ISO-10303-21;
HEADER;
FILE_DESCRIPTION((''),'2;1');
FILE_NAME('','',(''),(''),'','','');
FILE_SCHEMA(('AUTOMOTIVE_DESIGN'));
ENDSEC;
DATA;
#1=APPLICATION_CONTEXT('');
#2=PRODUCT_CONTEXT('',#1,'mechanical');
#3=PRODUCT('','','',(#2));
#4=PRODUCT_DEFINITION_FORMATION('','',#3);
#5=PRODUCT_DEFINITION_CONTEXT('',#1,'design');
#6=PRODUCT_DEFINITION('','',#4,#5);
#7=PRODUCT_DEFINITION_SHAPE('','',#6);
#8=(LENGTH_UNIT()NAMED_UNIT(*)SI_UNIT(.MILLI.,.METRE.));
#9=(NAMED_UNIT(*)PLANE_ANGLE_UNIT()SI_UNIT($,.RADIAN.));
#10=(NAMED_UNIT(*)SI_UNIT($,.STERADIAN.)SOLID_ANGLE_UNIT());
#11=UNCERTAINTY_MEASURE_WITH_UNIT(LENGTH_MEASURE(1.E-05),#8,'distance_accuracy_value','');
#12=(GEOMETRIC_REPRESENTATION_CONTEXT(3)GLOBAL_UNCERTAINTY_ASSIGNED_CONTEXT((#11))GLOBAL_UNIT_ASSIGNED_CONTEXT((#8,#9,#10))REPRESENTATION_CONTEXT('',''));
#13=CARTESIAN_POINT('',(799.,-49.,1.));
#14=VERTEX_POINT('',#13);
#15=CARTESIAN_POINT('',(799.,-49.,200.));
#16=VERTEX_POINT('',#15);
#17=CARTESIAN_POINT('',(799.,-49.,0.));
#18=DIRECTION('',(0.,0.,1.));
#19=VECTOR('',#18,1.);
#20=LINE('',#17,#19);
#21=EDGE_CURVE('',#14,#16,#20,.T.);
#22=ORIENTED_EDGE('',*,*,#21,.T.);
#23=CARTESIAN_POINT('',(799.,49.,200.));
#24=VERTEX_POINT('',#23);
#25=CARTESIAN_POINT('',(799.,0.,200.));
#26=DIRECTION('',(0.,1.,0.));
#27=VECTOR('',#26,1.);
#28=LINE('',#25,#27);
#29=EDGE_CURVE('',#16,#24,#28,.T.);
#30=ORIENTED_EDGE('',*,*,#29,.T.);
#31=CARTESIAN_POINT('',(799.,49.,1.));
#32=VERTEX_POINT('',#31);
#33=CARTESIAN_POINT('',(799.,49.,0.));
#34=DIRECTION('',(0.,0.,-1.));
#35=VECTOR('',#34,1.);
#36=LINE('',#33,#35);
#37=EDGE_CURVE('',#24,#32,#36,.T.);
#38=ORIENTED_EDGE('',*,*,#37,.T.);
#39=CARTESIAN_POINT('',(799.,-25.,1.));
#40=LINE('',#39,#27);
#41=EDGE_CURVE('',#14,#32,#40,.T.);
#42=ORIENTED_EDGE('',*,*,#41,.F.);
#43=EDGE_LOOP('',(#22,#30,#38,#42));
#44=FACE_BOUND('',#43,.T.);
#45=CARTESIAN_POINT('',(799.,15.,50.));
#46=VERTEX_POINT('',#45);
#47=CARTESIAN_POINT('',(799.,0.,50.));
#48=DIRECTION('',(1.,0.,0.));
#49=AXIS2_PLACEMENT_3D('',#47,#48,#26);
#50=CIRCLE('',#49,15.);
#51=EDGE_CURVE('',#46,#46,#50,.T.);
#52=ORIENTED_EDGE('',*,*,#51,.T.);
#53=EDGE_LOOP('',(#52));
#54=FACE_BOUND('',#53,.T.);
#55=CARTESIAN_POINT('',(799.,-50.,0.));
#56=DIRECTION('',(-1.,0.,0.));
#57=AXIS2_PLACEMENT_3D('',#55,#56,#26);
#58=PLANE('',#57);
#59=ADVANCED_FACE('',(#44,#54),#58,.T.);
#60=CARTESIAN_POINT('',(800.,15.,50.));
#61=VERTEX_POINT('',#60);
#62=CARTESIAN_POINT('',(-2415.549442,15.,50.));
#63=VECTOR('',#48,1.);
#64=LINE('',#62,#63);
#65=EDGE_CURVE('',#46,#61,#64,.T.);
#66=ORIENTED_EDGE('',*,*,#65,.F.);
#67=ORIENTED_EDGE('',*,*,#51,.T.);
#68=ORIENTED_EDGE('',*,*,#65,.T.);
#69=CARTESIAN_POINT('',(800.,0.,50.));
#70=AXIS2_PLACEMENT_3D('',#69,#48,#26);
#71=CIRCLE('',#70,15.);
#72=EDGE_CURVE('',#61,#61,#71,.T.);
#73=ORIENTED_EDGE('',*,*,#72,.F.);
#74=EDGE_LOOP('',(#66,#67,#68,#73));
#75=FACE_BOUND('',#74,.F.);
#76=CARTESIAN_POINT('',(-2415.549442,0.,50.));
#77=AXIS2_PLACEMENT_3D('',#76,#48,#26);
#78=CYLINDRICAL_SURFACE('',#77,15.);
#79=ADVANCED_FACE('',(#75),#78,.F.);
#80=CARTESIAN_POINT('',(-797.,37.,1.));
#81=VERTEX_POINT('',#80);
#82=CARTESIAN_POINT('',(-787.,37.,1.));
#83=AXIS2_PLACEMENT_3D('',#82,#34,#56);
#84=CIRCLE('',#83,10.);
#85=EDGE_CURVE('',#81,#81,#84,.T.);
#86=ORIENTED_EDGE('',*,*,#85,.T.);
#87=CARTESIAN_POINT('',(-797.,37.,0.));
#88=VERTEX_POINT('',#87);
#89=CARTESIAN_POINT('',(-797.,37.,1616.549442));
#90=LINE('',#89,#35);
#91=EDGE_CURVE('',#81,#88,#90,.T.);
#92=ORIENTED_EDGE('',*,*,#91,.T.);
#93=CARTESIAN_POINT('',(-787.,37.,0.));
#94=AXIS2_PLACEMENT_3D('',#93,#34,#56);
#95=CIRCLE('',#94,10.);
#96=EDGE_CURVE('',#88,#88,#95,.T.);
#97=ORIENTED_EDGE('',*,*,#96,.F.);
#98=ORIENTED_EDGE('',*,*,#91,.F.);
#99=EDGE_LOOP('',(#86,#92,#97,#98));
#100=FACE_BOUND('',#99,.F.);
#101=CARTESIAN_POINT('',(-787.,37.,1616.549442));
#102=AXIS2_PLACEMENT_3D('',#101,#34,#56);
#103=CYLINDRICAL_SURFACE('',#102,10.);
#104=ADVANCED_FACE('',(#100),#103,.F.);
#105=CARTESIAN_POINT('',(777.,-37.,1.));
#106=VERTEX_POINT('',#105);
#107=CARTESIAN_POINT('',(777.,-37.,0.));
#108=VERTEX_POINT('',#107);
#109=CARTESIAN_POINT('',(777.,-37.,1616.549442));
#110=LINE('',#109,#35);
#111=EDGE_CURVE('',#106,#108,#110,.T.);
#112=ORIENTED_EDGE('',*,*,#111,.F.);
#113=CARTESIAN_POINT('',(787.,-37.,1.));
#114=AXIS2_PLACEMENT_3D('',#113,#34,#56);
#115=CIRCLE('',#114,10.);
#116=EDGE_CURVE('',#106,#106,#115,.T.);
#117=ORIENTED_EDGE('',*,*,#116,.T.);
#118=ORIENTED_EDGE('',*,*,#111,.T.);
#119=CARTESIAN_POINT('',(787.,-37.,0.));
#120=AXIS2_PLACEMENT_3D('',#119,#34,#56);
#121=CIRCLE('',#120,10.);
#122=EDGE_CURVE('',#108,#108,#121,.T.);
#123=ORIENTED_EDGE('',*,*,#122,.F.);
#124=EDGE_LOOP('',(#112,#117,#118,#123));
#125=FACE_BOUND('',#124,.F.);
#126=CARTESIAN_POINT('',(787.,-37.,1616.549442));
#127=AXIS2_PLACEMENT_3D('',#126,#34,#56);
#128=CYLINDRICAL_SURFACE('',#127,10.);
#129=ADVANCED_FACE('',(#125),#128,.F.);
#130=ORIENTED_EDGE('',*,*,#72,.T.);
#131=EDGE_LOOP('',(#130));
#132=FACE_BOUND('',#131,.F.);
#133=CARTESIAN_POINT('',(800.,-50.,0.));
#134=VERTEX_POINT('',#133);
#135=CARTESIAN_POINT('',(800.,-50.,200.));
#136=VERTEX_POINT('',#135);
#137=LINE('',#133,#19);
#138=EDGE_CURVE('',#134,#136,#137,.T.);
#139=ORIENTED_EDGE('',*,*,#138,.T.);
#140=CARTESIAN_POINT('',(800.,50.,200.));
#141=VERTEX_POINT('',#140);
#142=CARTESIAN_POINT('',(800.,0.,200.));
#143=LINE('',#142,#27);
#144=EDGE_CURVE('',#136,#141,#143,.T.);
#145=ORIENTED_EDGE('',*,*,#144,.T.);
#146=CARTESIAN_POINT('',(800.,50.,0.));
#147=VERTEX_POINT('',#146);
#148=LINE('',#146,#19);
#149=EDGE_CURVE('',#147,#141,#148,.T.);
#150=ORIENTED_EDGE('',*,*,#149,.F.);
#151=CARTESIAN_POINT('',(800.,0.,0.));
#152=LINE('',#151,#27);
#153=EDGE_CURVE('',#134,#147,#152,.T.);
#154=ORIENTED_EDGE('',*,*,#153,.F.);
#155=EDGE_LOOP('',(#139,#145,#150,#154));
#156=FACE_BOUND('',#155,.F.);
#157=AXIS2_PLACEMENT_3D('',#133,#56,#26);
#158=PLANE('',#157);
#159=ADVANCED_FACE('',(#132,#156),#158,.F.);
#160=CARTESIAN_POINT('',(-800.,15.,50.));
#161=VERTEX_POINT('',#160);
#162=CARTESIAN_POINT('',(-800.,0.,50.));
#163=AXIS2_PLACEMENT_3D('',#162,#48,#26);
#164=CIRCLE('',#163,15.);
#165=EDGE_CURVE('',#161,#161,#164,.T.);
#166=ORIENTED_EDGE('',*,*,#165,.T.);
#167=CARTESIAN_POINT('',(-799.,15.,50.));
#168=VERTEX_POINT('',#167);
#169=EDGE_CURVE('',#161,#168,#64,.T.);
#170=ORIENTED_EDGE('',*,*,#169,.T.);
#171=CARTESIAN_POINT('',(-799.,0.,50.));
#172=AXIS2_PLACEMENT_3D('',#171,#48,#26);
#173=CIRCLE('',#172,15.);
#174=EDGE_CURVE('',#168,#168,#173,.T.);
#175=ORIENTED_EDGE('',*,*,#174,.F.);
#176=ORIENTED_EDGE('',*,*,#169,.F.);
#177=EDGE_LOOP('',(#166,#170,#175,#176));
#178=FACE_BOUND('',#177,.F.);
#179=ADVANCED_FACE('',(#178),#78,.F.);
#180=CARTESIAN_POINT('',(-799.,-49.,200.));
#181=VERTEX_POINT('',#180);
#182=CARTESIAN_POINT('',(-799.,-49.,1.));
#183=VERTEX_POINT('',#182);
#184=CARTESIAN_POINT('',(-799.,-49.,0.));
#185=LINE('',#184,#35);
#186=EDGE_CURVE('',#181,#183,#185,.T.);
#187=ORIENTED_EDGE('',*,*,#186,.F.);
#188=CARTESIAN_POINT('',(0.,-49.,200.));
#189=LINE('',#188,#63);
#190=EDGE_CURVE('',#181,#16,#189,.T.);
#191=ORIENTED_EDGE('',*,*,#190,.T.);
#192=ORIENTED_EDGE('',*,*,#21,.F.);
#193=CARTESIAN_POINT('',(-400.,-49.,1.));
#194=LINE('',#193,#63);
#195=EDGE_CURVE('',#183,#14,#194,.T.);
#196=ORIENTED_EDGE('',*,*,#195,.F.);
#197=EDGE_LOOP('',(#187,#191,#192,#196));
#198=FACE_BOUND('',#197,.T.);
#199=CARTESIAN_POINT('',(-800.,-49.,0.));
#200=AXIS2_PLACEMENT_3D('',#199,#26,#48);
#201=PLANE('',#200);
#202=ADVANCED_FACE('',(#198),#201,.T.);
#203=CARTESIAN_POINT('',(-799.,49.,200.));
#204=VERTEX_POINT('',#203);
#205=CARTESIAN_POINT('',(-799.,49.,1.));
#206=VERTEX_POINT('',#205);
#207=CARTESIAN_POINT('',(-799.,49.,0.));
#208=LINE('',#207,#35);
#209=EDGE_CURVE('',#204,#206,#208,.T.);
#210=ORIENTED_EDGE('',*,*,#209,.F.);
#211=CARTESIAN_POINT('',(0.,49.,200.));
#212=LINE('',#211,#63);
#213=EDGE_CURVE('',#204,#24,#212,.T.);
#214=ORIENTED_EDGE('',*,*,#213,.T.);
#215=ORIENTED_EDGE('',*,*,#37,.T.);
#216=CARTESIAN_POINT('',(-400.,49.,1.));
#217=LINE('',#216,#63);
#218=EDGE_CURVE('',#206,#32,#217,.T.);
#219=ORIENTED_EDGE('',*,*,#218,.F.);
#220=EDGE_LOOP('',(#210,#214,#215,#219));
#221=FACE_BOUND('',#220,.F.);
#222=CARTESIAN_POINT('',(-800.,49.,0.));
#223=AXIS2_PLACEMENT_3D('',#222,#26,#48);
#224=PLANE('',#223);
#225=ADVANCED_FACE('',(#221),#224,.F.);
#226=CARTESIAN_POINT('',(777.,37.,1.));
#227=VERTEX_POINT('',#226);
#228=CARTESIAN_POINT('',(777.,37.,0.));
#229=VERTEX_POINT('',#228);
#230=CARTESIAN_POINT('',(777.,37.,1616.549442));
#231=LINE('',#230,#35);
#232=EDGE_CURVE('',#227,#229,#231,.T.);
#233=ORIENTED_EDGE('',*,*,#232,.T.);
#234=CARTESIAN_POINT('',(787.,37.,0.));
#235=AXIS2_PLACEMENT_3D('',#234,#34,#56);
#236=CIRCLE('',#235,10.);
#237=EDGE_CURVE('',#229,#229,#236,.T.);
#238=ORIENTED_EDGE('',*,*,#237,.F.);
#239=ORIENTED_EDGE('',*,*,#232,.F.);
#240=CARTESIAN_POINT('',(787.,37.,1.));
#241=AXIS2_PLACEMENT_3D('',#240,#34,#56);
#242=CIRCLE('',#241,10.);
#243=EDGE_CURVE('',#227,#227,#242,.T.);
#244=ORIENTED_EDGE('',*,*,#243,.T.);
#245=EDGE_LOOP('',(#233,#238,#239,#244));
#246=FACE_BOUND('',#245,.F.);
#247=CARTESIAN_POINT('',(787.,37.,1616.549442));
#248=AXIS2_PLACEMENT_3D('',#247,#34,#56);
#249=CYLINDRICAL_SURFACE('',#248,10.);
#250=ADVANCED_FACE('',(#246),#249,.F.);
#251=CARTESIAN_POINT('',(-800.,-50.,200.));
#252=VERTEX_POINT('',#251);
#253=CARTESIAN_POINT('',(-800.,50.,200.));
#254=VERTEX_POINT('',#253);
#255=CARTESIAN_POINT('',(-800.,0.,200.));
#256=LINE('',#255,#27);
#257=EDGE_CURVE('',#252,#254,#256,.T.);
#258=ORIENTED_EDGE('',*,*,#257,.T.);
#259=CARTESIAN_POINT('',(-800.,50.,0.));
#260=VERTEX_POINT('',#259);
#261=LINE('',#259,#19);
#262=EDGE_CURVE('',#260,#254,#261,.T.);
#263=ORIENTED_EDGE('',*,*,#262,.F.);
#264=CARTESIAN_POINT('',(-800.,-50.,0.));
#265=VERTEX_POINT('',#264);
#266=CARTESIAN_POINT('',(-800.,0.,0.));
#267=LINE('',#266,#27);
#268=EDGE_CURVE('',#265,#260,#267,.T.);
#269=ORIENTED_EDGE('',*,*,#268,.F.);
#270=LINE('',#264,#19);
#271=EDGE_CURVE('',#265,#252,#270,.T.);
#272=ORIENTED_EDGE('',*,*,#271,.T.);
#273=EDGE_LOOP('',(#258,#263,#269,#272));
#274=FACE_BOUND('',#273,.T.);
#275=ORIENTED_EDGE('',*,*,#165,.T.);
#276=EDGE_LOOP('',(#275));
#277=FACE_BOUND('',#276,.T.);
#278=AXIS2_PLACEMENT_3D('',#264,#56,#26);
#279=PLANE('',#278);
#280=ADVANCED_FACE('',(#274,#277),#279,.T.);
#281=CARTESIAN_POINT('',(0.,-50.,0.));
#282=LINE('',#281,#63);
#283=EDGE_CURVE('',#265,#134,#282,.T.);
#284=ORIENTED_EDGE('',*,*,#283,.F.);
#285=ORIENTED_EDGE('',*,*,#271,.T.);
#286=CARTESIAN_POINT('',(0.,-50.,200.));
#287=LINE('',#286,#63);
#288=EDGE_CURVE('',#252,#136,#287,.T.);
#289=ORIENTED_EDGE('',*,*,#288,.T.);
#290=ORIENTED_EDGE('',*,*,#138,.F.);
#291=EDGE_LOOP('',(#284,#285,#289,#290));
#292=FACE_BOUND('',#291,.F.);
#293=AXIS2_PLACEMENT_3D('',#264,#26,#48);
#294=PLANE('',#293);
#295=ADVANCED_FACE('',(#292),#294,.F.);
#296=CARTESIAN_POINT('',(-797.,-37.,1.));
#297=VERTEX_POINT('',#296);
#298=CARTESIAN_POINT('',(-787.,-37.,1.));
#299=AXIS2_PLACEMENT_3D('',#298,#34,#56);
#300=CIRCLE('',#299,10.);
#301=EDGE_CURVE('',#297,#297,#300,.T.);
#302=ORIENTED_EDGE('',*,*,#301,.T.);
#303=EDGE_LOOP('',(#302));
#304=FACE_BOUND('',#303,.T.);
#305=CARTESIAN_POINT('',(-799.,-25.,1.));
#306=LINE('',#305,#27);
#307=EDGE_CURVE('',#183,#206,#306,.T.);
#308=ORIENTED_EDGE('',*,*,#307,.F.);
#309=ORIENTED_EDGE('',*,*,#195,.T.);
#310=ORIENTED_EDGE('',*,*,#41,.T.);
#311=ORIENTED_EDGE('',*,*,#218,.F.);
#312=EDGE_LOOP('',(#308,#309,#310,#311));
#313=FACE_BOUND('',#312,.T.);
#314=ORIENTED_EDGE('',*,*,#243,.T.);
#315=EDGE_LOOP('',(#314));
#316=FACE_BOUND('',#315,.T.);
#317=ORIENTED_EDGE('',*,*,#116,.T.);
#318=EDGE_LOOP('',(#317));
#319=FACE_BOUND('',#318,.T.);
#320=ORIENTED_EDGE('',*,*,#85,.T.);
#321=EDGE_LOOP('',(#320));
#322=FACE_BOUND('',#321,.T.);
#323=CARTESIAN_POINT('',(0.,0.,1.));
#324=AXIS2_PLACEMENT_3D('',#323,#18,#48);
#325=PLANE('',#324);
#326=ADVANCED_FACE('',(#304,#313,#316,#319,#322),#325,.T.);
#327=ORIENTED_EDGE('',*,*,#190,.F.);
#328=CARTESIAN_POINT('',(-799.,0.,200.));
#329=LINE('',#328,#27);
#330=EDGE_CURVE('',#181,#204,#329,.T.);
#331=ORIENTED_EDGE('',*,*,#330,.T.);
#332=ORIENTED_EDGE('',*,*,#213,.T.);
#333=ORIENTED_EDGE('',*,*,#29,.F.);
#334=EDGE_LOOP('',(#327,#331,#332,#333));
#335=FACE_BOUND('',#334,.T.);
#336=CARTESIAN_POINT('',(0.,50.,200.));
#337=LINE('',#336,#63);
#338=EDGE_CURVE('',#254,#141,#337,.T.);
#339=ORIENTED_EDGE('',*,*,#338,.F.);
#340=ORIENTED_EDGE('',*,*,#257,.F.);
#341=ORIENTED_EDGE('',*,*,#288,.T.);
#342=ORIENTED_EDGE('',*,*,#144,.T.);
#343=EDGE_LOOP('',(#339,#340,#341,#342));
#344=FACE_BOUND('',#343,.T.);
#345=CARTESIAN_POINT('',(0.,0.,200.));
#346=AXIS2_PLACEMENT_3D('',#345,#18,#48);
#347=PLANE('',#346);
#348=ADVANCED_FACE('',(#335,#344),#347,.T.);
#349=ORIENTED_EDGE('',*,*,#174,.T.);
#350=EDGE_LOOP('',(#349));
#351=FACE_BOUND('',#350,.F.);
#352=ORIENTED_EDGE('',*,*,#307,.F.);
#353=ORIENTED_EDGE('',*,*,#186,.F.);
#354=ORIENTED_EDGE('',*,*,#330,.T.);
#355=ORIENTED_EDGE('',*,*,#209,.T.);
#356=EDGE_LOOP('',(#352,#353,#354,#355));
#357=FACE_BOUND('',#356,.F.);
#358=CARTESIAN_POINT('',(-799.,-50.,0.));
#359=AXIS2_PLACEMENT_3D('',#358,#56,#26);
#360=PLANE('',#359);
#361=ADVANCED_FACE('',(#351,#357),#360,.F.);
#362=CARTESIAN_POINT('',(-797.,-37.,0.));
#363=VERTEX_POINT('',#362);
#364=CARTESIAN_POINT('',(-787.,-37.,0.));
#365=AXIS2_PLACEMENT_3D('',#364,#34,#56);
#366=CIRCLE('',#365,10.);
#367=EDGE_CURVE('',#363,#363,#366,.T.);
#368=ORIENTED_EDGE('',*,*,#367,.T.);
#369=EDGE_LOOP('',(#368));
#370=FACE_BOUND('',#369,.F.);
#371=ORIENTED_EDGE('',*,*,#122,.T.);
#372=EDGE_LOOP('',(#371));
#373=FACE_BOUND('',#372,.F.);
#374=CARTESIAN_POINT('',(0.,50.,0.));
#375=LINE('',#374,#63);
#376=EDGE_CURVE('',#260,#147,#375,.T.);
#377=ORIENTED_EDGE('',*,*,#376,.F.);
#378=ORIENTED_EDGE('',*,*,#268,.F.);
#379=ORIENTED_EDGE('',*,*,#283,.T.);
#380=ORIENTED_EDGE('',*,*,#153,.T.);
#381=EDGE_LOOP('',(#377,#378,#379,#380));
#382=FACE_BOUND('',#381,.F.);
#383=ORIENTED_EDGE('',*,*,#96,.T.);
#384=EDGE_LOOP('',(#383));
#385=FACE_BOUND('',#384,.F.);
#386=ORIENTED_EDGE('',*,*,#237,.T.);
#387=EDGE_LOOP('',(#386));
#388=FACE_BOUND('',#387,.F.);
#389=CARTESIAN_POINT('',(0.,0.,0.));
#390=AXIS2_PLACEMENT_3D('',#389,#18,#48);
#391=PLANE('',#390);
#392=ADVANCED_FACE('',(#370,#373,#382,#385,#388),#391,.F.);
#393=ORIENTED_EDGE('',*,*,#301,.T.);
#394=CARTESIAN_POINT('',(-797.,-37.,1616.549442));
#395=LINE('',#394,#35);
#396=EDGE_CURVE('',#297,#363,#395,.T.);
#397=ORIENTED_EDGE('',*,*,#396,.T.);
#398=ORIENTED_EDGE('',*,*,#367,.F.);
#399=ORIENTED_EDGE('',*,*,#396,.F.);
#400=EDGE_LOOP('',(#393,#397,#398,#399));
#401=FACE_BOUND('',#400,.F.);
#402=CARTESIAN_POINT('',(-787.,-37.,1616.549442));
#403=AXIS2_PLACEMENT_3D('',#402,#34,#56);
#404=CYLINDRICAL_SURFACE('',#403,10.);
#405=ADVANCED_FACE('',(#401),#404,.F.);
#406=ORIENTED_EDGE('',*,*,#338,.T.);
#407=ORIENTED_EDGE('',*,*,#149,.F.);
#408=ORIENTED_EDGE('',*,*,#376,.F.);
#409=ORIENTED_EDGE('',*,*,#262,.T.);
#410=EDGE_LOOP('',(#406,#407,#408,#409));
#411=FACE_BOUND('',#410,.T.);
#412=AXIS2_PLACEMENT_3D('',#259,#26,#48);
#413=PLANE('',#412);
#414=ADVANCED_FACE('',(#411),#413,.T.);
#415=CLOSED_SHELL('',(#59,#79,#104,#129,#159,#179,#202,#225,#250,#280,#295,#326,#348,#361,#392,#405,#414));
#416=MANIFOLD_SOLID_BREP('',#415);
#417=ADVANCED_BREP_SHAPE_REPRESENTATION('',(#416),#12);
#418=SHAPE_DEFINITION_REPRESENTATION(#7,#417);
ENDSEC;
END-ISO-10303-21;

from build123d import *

# Parameters (mm, degrees)
F0_W     = 1600
F0_H     = 100
F1_DEPTH = 200
F2_T     = -1
F5_D     = 20
F8_D     = 30


# Not quite as in the source:
# - the program builds the solid bodies; features that only make, move or delete a surface that nothing else refers to are left out


with BuildPart() as f1:
    # F0 (on Top) → F1 (new body)
    with BuildSketch(Plane.XY):
        Rectangle(F0_W, F0_H)
    extrude(amount=F1_DEPTH)

    # F2
    f2_openings = [f1.faces().sort_by_distance(p)[0] for p in [
        (0, 0, 200),
    ]]
    offset(amount=F2_T, openings=f2_openings)

    # F5 (through all)
    with Locations(Plane.XY.offset(1)):
        with Locations((787, 37), (787, -37), (-787, 37), (-787, -37)):
            Hole(F5_D / 2)

    # F8 (through all)
    with Locations(Plane(origin=(-800, 0, 0), x_dir=(0, -1, 0), z_dir=(-1, 0, 0))):
        with Locations((0, 50)):
            Hole(F8_D / 2)


solid = f1.part
